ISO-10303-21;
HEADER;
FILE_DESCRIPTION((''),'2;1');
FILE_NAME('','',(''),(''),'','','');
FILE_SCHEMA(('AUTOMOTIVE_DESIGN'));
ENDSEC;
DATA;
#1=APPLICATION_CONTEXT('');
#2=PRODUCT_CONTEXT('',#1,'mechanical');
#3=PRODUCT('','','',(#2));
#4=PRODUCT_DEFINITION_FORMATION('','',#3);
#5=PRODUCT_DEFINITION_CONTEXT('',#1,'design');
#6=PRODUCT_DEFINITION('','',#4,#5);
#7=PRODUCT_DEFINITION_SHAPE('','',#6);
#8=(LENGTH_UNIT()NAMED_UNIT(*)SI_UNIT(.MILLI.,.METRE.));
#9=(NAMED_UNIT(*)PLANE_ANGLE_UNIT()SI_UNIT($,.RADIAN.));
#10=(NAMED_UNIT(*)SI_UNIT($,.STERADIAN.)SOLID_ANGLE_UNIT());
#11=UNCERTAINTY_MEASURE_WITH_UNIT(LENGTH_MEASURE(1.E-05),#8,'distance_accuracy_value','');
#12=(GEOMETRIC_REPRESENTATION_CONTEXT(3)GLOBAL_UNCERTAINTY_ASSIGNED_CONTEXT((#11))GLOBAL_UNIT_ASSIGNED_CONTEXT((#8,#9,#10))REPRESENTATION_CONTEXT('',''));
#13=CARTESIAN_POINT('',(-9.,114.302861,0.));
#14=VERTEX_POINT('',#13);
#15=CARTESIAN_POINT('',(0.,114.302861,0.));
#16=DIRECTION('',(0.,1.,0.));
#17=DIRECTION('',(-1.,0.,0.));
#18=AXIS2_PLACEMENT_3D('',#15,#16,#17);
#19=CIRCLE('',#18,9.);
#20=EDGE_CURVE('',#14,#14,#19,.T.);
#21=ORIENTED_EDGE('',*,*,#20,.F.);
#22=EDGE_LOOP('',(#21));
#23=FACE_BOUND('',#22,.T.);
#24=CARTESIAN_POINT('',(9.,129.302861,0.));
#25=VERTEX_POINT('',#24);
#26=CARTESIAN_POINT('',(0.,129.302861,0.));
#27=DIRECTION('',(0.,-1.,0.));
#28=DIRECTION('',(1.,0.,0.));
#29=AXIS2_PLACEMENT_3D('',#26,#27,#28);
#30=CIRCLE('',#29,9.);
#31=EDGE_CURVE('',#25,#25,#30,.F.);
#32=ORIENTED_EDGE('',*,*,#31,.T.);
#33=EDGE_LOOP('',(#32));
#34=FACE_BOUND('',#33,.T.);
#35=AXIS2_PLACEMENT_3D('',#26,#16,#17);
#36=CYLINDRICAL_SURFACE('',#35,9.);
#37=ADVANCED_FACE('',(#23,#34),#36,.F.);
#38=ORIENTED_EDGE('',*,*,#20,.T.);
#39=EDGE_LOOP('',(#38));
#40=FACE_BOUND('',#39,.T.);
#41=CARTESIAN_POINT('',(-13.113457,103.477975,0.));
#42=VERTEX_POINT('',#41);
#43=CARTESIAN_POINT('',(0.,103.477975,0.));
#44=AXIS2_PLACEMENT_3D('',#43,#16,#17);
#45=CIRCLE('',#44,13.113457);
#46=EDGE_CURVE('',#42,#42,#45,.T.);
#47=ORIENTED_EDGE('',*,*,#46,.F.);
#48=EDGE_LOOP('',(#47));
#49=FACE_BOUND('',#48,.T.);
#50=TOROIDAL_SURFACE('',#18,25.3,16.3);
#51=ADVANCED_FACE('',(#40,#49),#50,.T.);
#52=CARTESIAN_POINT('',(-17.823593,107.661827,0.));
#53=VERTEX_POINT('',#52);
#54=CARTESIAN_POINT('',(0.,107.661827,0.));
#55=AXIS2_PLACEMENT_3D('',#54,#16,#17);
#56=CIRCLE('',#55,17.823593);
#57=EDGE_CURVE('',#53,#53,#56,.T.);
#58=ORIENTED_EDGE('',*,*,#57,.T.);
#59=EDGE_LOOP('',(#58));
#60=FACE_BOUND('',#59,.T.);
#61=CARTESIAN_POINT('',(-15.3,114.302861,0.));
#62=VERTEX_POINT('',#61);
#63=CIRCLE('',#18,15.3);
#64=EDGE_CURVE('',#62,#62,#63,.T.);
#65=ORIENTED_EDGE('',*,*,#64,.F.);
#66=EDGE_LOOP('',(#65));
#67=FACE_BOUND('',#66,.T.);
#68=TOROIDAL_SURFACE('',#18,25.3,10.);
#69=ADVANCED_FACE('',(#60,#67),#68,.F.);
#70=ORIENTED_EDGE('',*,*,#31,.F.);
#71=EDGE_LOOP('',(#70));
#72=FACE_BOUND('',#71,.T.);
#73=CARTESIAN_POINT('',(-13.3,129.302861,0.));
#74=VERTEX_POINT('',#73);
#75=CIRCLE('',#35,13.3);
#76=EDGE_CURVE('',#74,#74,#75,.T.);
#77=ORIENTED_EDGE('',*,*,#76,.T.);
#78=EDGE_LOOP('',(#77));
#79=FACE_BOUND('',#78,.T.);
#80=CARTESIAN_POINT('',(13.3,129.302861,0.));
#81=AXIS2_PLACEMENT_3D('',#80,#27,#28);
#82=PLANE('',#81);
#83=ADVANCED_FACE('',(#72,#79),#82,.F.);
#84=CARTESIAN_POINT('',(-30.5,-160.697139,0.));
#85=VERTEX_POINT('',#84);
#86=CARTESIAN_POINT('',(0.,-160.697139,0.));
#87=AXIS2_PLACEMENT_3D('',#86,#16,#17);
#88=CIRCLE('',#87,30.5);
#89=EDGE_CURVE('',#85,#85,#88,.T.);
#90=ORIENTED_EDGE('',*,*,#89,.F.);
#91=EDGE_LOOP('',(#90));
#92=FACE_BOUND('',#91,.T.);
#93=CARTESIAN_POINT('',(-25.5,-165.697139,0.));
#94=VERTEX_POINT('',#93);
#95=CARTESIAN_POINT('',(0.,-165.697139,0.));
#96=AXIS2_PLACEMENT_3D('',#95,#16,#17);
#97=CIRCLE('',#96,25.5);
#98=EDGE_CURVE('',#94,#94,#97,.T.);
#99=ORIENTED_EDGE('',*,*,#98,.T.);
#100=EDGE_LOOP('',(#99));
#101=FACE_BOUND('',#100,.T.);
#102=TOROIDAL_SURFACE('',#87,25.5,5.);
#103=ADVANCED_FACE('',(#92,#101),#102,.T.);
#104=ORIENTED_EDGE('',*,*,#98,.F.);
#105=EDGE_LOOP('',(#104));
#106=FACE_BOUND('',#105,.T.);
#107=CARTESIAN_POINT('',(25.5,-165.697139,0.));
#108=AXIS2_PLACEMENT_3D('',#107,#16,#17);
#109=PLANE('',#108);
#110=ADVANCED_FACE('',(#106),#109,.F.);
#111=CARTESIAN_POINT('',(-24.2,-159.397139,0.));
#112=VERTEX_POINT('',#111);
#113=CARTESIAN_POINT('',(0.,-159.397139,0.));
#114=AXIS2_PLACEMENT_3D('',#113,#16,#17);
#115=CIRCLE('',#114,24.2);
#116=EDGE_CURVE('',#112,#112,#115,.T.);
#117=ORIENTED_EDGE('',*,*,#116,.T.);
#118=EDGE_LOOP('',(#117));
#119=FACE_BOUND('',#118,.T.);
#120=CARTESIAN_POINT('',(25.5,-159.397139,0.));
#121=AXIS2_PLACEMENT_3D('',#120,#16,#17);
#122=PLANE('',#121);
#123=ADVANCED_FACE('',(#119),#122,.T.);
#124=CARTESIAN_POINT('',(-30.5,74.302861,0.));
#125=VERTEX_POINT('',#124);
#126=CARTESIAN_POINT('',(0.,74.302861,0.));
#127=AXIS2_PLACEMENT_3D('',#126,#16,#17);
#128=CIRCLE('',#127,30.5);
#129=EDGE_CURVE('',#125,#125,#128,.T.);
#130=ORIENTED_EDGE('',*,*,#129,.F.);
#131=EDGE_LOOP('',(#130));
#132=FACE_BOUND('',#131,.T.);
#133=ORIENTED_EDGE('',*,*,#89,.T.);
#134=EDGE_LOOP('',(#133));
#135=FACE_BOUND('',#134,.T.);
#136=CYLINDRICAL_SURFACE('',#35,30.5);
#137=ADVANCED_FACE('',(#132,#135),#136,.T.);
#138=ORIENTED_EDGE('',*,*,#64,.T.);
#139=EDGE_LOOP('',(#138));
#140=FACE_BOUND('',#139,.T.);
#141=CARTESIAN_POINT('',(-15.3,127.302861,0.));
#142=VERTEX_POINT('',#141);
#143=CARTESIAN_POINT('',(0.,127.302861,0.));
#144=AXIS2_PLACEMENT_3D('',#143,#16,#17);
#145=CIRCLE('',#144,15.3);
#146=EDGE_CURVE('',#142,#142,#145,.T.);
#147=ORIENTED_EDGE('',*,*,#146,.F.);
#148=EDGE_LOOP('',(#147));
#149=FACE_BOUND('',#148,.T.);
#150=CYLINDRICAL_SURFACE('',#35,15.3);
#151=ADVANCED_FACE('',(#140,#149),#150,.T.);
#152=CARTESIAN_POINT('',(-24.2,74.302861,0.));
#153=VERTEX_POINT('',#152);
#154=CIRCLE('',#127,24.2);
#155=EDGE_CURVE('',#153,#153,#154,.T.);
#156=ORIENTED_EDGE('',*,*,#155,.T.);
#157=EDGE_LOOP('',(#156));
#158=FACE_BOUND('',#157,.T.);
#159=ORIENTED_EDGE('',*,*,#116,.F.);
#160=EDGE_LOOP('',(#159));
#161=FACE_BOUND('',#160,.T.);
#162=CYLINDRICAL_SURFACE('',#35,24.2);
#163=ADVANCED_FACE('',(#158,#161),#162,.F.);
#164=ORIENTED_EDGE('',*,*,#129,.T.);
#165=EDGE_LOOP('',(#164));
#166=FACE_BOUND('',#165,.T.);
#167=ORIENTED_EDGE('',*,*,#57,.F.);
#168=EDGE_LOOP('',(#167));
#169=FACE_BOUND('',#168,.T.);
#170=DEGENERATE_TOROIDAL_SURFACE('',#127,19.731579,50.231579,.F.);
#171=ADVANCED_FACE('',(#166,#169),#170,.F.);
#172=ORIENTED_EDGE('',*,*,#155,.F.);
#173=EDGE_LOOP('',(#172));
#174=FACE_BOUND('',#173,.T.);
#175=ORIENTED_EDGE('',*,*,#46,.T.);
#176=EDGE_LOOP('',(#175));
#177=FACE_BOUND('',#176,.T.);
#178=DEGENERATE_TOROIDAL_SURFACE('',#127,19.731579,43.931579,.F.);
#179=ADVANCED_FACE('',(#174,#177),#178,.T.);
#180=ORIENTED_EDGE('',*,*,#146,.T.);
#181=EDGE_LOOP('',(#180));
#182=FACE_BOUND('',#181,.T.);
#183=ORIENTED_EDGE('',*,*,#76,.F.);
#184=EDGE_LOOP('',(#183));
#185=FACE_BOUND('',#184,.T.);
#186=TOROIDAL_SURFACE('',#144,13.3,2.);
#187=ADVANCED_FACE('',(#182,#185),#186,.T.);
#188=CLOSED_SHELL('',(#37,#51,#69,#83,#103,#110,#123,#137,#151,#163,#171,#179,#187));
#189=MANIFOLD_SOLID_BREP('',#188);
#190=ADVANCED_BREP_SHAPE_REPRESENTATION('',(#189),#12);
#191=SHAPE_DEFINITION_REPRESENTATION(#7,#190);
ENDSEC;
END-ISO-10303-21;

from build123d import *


# Read off the part's stored shape, not the designer's step: 抽壳1
with BuildPart() as part:
    # 草图1 → 旋转1 (revolve)
    with BuildSketch(Plane.XY, mode=Mode.PRIVATE) as revolve_1_sk:
        with BuildLine():
            Line((0, 129.302861252), (0, -165.697138748))
            Line((0, -165.697138748), (25.5, -165.697138748))
            ThreePointArc((25.5, -165.697138748), (29.035533906, -164.232672654), (30.5, -160.697138748))
            Line((30.5, -160.697138748), (30.5, 74.302861252))
            ThreePointArc((30.5, 74.302861252), (27.22407628, 92.146010239), (17.823593149, 107.661826649))
            ThreePointArc((17.823593149, 107.661826649), (15.952164194, 110.750683646), (15.3, 114.302861252))
            Line((15.3, 114.302861252), (15.3, 127.302861252))
            ThreePointArc((15.3, 127.302861252), (14.714213562, 128.717074815), (13.3, 129.302861252))
            Line((13.3, 129.302861252), (0, 129.302861252))
        make_face()
    revolve(revolve_1_sk.sketch.rotate(Axis((0, 129.302861252, 0), (0, -1, 0)), 180), axis=Axis((0, 129.302861252, 0), (0, -1, 0)))

    # 抽壳1 outline → 抽壳1 (revolve, cut)
    with BuildSketch(Plane.XY):
        with BuildLine():
            Line((0, -159.397138748), (24.2, -159.397138748))
            Line((24.2, -159.397138748), (24.2, 74.302861252))
            ThreePointArc((24.2, 74.302861252), (21.334939722, 89.908138347), (13.113456833, 103.477974849))
            ThreePointArc((13.113456833, 103.477974849), (10.063027636, 108.512811754), (9, 114.302861252))
            Line((9, 114.302861252), (9, 129.302861252))
            Line((9, 129.302861252), (0, 129.302861252))
            Line((0, 129.302861252), (0, -159.397138748))
        make_face()
    revolve(axis=Axis((0, 0, 0), (0, 1, 0)), mode=Mode.SUBTRACT)


solid = part.part
